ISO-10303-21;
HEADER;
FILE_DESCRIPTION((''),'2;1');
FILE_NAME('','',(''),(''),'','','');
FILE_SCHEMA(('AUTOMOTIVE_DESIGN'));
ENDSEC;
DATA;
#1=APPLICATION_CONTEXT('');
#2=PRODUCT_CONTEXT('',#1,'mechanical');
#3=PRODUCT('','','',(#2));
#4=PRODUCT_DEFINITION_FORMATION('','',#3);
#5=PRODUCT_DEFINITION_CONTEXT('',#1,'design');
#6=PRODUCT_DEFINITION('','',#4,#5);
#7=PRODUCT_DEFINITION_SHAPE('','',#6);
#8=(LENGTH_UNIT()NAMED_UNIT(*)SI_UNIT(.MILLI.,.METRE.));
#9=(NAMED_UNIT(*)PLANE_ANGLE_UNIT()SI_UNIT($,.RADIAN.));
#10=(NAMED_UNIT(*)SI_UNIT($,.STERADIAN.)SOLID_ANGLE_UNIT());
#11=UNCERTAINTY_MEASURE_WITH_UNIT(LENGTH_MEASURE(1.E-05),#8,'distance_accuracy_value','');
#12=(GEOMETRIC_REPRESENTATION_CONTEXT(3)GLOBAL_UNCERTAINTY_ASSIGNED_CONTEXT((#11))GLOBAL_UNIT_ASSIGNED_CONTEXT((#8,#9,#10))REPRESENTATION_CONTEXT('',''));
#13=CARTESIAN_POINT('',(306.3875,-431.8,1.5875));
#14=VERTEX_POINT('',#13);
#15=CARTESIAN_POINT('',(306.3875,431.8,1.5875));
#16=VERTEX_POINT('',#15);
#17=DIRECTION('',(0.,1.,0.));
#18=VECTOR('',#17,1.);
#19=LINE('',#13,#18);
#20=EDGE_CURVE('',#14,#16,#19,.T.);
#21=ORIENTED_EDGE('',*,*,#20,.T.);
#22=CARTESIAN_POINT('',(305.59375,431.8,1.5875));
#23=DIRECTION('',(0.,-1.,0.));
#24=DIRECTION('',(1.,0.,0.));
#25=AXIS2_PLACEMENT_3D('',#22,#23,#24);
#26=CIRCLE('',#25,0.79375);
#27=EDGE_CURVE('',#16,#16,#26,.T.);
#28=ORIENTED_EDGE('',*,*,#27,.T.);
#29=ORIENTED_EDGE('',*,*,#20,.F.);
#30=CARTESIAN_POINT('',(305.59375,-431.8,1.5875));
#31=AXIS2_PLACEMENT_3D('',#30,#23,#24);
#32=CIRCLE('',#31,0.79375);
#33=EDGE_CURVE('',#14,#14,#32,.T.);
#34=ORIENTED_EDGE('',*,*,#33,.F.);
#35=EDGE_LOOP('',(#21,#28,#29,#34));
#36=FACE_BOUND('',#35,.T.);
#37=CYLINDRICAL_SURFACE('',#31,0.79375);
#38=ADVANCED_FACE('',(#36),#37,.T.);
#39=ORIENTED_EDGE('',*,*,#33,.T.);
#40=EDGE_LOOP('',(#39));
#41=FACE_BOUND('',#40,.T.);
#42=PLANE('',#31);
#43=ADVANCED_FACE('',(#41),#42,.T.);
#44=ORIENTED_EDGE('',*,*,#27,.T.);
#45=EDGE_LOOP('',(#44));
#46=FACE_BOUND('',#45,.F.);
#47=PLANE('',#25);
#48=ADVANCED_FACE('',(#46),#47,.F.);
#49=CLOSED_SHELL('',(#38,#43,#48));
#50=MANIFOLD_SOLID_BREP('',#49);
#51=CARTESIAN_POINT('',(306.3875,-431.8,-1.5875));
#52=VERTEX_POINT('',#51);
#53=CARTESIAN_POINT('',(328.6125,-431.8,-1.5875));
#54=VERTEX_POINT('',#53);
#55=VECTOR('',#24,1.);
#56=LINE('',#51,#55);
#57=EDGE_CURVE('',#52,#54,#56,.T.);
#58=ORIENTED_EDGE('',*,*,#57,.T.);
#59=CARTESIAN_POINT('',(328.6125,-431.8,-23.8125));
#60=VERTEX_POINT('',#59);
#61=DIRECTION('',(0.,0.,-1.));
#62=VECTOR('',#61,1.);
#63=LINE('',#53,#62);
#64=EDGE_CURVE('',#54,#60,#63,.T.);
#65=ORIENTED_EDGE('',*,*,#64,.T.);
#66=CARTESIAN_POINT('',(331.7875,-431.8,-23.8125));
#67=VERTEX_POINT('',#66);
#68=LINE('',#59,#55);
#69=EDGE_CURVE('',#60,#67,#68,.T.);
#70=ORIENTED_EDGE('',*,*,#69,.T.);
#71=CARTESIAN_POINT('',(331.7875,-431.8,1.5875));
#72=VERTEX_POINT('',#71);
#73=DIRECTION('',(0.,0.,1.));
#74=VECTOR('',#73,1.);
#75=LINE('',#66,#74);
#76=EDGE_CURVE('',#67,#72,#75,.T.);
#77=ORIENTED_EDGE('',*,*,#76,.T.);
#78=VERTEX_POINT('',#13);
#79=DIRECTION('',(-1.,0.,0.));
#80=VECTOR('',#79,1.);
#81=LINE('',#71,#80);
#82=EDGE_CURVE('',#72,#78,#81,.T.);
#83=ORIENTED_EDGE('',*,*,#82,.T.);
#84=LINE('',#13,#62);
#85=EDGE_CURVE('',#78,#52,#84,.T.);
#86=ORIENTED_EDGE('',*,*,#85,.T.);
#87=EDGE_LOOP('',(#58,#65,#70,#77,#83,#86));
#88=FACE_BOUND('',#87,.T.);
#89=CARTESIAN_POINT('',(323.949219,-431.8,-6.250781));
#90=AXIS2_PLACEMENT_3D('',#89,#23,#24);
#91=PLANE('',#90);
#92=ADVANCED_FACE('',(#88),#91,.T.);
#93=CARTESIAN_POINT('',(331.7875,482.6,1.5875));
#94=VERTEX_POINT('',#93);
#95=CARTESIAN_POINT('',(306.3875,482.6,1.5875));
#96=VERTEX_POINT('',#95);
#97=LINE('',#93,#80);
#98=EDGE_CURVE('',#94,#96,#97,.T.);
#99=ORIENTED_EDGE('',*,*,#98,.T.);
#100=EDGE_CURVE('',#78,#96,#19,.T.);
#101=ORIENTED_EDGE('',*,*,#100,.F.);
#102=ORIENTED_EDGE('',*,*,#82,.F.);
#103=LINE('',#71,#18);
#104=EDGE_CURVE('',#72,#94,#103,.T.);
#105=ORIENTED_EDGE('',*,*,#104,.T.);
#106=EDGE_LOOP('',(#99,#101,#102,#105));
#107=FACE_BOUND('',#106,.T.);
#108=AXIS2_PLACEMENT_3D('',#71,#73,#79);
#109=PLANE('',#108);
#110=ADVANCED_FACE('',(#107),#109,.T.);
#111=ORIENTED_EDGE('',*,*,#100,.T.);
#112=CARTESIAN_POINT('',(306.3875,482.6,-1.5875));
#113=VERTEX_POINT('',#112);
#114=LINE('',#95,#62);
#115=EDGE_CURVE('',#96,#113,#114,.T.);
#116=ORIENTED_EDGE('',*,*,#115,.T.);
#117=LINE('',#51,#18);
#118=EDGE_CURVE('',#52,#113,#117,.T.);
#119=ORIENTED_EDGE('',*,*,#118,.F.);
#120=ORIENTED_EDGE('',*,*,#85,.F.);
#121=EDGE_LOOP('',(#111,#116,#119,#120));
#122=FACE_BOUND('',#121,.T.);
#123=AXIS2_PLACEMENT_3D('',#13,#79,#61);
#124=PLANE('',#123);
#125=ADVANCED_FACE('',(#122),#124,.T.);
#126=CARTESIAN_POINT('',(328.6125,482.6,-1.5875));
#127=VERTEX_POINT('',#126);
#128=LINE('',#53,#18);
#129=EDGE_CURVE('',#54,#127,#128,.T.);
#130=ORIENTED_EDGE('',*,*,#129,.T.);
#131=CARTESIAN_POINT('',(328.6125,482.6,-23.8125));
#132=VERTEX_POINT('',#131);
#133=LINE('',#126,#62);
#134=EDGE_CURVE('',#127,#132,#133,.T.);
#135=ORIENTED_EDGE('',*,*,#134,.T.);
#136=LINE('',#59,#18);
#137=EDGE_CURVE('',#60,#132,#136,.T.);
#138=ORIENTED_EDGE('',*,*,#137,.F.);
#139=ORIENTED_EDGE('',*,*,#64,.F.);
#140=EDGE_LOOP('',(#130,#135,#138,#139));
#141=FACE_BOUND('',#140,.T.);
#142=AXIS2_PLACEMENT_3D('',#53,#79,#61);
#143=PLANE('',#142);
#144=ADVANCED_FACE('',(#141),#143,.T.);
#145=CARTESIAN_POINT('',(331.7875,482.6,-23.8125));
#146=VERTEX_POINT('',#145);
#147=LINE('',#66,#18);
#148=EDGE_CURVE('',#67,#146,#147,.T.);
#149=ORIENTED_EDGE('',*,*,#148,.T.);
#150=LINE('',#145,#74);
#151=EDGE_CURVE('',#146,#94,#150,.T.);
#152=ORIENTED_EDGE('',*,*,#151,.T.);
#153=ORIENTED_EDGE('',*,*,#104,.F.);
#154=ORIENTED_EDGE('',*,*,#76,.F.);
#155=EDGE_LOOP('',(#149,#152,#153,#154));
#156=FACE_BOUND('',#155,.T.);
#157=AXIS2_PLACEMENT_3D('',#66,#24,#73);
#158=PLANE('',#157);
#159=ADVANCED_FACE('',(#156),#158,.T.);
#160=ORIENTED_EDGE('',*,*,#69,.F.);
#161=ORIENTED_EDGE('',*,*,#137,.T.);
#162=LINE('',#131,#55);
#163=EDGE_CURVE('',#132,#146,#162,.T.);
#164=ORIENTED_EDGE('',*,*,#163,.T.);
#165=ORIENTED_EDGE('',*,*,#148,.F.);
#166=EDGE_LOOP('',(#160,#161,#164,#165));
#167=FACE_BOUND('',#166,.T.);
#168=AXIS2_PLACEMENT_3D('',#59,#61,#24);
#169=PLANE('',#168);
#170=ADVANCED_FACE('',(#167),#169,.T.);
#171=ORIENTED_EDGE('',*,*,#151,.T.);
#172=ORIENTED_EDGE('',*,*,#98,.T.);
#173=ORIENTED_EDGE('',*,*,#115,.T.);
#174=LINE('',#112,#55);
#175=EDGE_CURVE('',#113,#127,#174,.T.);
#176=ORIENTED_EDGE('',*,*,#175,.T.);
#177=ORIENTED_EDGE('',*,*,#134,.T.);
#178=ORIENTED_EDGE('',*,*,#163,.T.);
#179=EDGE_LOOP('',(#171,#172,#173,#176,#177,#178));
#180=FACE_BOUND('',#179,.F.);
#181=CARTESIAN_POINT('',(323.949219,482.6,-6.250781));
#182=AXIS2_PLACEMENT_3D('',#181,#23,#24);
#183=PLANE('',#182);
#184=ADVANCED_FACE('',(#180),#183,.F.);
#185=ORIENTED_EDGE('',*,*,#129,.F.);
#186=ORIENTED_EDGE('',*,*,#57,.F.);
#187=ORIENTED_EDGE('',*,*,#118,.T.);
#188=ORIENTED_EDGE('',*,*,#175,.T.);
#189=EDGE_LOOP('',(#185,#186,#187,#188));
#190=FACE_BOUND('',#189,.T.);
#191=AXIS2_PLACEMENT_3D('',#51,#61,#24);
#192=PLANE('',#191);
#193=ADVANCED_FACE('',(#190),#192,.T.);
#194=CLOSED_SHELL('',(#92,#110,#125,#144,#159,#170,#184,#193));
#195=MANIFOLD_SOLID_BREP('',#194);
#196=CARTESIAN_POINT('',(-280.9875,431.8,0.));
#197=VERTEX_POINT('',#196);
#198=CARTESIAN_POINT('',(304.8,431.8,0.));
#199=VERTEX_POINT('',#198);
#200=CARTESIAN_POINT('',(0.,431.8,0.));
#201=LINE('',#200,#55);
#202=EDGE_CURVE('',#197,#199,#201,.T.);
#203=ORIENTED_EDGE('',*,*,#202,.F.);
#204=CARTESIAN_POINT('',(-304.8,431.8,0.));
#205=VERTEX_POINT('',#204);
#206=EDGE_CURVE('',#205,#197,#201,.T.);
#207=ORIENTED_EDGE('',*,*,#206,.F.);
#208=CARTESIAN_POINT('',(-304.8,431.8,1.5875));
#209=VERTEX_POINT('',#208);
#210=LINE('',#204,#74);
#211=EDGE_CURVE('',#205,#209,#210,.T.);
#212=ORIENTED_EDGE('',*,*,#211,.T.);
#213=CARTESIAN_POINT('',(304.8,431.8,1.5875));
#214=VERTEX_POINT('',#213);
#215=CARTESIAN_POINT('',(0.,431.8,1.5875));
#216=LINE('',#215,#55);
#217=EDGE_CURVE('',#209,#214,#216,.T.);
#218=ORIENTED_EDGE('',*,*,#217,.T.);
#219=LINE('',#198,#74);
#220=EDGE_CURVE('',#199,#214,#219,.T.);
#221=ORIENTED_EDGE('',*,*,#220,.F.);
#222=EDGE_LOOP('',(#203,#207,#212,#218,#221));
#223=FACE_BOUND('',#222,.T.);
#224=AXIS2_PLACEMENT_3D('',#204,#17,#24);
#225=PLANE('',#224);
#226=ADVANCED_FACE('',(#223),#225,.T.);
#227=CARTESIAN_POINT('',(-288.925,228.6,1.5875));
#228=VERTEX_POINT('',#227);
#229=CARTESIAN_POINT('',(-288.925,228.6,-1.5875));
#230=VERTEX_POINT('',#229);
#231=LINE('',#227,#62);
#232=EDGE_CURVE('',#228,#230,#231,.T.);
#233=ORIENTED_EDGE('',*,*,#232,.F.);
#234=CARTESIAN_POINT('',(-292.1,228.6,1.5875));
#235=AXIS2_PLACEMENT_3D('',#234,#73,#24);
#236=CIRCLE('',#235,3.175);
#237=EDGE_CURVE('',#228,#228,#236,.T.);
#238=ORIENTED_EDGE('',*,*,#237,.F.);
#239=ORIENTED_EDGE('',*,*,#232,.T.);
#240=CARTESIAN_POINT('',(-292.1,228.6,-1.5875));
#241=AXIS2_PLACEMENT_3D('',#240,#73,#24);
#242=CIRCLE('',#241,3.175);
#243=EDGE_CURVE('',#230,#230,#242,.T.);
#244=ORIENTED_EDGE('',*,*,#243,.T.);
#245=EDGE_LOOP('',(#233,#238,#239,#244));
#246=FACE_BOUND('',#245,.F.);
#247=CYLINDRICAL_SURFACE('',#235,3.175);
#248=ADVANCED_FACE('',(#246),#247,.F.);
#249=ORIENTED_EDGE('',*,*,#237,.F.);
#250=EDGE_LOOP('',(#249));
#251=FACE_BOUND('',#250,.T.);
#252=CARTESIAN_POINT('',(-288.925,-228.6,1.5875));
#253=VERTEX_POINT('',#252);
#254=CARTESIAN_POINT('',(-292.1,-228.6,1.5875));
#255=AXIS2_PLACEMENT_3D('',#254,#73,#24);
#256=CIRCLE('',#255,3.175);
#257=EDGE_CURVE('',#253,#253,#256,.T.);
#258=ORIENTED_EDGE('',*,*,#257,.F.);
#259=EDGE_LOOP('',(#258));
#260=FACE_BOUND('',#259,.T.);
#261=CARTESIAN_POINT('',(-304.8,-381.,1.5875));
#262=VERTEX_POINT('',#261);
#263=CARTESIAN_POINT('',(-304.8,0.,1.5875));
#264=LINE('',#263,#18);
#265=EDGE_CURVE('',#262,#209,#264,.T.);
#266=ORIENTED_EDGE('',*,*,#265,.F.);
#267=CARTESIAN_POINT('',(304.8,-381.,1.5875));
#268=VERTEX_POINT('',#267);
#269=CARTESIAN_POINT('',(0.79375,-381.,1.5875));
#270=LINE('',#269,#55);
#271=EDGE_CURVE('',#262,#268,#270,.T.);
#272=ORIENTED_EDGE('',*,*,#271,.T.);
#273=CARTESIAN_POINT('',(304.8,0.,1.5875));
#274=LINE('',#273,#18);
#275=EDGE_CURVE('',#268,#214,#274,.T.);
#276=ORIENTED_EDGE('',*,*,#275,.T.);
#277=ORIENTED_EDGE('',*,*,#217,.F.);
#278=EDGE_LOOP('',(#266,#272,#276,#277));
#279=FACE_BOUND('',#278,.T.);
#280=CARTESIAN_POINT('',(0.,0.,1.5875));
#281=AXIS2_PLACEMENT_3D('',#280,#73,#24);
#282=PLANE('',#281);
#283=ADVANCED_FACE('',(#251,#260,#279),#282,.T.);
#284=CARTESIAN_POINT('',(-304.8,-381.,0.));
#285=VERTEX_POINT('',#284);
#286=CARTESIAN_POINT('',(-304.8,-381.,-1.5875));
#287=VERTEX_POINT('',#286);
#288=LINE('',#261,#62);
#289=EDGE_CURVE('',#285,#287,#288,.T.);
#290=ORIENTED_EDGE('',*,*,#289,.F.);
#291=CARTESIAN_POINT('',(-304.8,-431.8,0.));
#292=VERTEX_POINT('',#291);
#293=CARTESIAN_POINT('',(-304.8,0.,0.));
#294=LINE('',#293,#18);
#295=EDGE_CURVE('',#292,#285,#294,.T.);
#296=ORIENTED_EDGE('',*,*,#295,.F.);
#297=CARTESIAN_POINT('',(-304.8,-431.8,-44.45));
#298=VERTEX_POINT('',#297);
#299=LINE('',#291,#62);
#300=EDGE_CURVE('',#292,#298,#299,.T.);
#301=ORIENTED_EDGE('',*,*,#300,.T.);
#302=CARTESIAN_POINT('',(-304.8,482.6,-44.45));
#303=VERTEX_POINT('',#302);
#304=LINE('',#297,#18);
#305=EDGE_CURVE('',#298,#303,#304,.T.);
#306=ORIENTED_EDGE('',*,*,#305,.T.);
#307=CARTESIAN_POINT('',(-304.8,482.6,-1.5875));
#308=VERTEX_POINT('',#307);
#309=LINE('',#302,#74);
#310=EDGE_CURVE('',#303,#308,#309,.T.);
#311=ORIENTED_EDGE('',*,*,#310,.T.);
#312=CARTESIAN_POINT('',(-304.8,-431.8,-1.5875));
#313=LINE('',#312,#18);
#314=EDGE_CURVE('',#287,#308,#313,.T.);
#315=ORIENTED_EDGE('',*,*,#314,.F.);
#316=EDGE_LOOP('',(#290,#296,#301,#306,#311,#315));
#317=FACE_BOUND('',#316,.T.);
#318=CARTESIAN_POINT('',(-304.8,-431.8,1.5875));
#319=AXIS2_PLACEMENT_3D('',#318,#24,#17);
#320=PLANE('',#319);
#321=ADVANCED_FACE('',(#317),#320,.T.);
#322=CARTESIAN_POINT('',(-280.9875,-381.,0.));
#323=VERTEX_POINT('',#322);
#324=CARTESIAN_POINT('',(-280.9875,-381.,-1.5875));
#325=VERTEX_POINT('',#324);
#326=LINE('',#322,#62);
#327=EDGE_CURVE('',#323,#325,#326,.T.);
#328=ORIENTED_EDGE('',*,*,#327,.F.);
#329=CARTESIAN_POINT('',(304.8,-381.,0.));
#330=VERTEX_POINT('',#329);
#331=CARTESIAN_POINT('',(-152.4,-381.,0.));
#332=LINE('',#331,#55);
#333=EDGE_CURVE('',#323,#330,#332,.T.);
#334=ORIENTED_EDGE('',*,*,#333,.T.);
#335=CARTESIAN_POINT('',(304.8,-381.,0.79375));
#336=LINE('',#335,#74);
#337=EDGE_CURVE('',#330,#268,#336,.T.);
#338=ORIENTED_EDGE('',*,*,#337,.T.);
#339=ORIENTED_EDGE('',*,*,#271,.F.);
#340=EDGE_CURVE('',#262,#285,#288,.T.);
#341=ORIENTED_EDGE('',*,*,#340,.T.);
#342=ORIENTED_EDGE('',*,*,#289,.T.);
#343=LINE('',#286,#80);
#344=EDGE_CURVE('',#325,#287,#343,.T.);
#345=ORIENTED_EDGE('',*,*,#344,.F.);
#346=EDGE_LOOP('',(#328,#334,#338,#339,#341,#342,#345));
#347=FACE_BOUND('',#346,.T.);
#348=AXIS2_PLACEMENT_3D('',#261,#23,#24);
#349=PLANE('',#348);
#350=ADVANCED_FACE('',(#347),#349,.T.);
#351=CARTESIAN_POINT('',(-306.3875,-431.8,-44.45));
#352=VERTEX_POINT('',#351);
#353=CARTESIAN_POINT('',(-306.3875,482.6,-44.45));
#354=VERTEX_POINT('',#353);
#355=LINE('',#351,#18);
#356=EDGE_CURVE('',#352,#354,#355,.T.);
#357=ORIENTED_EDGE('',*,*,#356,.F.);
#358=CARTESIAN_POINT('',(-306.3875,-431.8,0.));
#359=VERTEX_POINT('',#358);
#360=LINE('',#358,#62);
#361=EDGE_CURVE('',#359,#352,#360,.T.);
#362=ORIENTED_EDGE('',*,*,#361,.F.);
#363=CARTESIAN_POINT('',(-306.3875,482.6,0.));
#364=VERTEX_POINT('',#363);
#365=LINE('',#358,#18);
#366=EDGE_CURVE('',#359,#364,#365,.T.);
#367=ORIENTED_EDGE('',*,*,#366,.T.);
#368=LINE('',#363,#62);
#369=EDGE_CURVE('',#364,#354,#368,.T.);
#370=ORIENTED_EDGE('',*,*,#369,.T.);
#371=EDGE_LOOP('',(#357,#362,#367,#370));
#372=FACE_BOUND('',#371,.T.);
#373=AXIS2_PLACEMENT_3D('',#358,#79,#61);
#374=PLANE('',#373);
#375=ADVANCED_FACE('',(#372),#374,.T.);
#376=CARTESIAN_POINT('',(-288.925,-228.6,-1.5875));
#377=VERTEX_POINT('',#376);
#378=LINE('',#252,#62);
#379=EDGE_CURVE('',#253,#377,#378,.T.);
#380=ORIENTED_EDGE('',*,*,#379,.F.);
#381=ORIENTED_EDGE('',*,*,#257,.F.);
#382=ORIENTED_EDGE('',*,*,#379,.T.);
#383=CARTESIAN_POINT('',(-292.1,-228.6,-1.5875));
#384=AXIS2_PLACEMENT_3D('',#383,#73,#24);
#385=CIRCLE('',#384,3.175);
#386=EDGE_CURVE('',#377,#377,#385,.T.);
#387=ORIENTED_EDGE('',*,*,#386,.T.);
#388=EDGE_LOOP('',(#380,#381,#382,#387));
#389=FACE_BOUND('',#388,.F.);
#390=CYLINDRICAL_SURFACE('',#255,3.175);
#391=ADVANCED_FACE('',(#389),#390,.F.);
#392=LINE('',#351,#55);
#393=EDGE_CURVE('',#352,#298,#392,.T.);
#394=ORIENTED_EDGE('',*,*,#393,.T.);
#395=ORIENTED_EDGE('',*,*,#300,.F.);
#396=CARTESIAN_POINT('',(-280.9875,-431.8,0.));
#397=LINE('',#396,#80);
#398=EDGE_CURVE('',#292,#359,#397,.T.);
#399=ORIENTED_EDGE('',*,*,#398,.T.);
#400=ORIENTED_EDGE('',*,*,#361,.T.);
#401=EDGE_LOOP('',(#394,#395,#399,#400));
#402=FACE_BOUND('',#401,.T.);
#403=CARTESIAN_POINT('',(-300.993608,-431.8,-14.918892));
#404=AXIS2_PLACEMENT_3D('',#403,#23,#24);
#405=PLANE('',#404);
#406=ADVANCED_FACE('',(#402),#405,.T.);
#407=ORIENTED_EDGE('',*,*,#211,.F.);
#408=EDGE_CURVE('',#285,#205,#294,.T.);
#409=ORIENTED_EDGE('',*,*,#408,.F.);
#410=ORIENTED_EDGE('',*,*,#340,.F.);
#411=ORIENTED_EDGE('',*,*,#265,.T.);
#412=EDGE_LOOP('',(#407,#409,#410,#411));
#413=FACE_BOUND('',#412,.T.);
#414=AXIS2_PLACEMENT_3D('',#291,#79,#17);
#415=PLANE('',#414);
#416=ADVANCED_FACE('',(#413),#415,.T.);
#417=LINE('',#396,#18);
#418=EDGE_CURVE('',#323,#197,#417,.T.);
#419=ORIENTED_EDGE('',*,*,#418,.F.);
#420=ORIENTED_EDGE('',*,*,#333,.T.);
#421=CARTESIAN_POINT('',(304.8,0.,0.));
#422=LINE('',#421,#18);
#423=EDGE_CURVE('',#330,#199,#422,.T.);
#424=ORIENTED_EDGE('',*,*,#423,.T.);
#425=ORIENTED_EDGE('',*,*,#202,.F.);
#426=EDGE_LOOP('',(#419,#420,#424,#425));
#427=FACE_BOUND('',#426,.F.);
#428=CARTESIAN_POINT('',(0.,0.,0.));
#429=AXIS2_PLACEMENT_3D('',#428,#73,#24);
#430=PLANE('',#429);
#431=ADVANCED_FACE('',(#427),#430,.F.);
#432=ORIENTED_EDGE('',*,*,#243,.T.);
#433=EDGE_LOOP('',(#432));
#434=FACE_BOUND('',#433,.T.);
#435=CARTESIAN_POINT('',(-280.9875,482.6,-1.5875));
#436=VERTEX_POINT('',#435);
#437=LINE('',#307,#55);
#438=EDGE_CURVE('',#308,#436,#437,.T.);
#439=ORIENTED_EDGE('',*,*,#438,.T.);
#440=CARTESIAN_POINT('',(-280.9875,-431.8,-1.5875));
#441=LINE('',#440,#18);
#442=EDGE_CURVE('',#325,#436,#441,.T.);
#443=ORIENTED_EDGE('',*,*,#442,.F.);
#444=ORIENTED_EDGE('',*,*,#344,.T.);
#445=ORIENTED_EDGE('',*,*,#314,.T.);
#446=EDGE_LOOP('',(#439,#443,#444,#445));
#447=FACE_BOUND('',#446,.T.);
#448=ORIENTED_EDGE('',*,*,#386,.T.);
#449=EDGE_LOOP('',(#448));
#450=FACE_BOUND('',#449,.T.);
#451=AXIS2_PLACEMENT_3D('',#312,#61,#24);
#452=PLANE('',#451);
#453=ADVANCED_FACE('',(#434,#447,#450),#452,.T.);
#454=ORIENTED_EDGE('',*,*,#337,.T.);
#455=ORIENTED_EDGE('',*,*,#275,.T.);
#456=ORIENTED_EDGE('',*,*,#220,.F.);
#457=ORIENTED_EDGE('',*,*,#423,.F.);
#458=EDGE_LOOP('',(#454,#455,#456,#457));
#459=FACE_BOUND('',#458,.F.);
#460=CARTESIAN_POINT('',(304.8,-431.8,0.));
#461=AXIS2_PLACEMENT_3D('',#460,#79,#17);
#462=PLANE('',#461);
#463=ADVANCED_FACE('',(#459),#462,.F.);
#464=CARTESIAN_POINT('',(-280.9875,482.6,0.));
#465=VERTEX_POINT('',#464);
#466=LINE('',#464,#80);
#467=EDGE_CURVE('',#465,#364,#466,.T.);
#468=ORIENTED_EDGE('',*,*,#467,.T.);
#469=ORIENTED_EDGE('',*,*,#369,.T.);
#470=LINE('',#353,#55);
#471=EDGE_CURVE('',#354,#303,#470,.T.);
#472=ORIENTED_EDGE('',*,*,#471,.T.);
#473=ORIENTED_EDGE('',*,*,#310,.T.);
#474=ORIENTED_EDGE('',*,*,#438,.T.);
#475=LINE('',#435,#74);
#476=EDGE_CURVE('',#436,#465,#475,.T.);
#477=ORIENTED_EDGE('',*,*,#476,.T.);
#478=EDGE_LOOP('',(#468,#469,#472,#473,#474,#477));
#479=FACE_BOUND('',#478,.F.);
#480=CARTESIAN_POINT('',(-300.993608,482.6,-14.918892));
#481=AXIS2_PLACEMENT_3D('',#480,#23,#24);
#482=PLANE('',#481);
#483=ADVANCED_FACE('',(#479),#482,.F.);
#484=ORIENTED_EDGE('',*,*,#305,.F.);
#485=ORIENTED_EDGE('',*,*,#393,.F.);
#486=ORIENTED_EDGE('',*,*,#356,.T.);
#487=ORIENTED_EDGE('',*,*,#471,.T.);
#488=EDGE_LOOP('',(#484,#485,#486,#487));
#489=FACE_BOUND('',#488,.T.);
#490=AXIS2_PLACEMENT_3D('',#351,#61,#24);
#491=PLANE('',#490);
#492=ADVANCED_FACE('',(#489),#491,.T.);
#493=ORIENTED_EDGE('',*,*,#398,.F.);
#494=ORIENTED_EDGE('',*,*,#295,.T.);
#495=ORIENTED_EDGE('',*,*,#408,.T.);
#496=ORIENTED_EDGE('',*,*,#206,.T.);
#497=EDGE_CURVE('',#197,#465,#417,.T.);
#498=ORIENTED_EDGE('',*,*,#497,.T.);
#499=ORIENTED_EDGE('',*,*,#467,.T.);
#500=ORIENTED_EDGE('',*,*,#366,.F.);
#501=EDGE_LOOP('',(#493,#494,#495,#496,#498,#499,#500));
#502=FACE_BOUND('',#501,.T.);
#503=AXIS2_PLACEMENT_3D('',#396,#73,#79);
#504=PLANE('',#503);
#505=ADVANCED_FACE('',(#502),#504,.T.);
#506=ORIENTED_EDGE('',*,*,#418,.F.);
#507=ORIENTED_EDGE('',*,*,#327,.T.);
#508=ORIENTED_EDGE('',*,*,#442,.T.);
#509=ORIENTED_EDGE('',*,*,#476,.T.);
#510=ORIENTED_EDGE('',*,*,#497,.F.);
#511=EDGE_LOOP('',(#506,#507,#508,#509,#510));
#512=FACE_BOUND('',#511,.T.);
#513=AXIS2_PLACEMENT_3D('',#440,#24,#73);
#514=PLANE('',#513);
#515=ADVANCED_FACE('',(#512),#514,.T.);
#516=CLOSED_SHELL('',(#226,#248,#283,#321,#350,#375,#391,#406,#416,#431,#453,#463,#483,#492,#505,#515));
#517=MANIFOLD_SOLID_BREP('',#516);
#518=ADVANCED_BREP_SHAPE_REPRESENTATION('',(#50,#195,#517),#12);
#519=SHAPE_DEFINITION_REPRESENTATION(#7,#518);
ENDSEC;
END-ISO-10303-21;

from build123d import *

# Parameters (mm, degrees)
F0_W     = 609.6
F0_H     = 863.6
F1_DEPTH = 1.5875
F3_DEPTH = 863.6
F5_DEPTH = 914.4
F4_R     = 3.175
F6_DEPTH = 25.4
F7_W     = 611.1875
F7_H     = 50.8
F8_DEPTH = 25.4


# Not quite as in the source:
# - a feature names something its author has since deleted; it is built from what else it names


with BuildPart() as f1:
    # F0 (on Top) → F1 (new body)
    with BuildSketch(Plane.XY):
        Rectangle(F0_W, F0_H)
    extrude(amount=F1_DEPTH)

    # F2 (on face) → F5 (join)
    with BuildSketch(Plane.XZ.offset(431.8)):
        Polygon((-280.9875, -1.5875), (-280.9875, 0), (-304.8, 0), (-306.3875, 0), (-306.3875, -44.45), (-304.8, -44.45), (-304.8, -1.5875), align=None)
    extrude(amount=-F5_DEPTH)

    # F4 (on face) → F6 (cut)
    with BuildSketch(Plane.XY.offset(1.5875)):
        with Locations((-292.1, 228.6)):
            Circle(F4_R)
        with Locations((-292.1, -228.6)):
            Circle(F4_R)
    extrude(amount=-F6_DEPTH, mode=Mode.SUBTRACT)

    # F7 (on face) → F8 (cut)
    with BuildSketch(Plane.XY.offset(1.5875)):
        with Locations((0.79375, -406.4)):
            Rectangle(F7_W, F7_H)
    extrude(amount=-F8_DEPTH, mode=Mode.SUBTRACT)


with BuildPart() as f3:
    # F2 (on face) → F3 (new body, through all)
    with BuildSketch(Plane.XZ.offset(431.8)):
        with BuildLine():
            ThreePointArc((304.8, 1.5875), (305.59375, 0.79375), (306.3875, 1.5875))
            ThreePointArc((306.3875, 1.5875), (305.59375, 2.38125), (304.8, 1.5875))
        make_face()
    extrude(amount=-F3_DEPTH)


with BuildPart() as f5:
    # F2 (on face) → F5, piece 2 (new body)
    with BuildSketch(Plane.XZ.offset(431.8)):
        Polygon((331.7875, 1.5875), (306.3875, 1.5875), (306.3875, -1.5875), (328.6125, -1.5875), (328.6125, -23.8125), (331.7875, -23.8125), align=None)
    extrude(amount=-F5_DEPTH)


solid = Compound([f1.part, f3.part, f5.part])
